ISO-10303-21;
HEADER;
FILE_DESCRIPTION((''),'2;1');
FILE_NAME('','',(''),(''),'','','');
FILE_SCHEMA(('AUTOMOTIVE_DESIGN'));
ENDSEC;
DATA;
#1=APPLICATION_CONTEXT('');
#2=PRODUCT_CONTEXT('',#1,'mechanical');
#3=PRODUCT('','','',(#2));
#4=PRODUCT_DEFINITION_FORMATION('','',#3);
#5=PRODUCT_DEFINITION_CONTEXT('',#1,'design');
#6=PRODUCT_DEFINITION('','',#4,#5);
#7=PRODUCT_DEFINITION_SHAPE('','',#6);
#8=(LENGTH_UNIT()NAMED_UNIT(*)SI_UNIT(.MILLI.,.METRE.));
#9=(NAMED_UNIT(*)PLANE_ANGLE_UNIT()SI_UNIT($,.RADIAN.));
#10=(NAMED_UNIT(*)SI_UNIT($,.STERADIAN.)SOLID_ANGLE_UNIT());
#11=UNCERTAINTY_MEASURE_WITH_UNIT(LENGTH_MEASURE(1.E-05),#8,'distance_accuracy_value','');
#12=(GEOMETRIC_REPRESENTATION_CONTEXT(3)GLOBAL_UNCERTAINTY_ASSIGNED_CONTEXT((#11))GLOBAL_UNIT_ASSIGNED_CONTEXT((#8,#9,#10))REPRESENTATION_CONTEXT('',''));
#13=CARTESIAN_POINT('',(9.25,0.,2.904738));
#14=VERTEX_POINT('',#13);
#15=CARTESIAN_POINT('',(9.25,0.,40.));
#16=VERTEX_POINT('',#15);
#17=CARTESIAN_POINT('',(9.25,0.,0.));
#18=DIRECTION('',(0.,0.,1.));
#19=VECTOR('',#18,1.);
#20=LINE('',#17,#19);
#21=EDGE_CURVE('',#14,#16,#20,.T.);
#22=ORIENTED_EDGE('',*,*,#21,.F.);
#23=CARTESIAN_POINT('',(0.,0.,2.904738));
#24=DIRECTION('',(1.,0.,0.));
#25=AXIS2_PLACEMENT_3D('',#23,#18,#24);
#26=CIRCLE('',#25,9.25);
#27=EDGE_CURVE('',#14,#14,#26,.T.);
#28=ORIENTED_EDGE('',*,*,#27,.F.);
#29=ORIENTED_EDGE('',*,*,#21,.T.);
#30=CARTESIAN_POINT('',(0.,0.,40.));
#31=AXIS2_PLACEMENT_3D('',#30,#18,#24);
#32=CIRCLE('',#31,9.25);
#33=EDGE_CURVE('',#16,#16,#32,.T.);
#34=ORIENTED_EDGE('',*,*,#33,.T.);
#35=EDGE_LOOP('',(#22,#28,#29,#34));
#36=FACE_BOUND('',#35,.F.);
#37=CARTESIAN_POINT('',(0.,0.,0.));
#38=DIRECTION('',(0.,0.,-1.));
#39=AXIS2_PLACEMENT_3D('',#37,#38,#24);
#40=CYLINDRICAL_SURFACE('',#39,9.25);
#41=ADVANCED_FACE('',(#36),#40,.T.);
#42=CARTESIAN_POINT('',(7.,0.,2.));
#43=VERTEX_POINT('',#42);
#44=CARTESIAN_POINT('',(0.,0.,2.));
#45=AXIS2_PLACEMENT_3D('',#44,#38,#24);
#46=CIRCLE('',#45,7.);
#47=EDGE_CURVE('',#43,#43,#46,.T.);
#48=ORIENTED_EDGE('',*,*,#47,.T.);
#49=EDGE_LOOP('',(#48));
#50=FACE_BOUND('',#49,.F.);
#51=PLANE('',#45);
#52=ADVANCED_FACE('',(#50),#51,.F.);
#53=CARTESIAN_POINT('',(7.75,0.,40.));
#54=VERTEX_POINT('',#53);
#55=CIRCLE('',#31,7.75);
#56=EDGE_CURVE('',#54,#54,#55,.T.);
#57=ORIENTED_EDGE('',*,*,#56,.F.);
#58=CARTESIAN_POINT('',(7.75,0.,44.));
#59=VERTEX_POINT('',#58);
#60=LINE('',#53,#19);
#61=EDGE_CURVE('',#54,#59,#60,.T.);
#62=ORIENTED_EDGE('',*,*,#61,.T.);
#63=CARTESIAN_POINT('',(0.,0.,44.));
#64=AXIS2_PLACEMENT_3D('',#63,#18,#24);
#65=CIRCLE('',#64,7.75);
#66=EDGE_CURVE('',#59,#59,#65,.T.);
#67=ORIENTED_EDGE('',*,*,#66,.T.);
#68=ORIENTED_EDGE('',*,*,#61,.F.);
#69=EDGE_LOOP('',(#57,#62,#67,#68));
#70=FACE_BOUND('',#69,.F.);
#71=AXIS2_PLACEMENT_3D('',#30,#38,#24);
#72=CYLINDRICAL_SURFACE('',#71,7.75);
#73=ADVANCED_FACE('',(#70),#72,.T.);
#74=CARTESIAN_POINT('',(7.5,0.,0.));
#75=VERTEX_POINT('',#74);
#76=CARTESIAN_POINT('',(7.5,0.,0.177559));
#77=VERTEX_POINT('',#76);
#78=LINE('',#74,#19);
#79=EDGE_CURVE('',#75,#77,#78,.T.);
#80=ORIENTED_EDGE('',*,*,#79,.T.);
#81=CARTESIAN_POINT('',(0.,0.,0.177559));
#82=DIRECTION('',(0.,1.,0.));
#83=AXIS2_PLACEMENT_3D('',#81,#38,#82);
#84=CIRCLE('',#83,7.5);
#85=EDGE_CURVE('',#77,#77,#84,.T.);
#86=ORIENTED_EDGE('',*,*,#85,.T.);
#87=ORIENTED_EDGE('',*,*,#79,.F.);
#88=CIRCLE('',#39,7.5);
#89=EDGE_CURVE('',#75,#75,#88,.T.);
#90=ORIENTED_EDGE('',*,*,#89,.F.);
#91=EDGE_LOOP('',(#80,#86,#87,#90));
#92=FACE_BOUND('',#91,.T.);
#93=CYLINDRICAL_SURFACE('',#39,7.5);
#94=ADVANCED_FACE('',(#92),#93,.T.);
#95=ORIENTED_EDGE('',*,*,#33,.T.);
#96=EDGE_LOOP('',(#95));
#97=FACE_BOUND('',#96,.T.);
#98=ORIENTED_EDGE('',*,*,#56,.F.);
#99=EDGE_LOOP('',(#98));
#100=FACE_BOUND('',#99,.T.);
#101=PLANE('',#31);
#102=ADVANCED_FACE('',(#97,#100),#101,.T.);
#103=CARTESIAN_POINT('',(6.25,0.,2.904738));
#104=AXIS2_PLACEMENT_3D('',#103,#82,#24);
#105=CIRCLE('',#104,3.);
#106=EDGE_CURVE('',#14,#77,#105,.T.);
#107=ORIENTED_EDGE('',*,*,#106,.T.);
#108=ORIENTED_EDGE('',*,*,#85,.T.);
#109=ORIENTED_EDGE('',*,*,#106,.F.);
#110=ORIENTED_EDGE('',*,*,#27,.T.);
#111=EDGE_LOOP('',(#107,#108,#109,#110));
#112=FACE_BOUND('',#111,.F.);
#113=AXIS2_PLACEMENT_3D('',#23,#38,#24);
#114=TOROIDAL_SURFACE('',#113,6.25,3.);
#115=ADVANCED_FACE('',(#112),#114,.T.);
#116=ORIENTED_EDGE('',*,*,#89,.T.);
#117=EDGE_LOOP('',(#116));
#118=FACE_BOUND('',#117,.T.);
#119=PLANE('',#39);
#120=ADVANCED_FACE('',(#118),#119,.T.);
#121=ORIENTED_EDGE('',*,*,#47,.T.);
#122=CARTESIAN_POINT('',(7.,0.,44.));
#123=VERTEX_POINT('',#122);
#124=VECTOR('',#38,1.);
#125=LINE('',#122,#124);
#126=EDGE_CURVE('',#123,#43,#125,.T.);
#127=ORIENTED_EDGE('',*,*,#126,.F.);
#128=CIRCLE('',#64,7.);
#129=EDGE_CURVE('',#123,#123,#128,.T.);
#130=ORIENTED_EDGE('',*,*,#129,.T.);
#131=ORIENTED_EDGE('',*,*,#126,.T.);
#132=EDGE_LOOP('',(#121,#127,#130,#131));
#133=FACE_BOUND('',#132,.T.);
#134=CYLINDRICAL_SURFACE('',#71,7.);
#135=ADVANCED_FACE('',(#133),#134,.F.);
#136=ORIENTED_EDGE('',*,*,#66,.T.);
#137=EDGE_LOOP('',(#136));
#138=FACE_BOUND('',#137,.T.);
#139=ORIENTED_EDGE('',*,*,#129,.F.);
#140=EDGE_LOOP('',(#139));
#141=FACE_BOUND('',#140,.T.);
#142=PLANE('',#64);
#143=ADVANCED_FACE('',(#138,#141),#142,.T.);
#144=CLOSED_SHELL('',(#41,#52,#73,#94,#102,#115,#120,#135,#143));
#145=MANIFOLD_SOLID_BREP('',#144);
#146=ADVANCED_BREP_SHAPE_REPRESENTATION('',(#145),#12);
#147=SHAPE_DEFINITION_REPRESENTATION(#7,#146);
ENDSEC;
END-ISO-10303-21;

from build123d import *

# Parameters (mm, degrees)
F0_R     = 9.25
F0_R_2   = 7
F1_DEPTH = 40
F2_R     = 7.5
F4_DEPTH = 2
F5_R     = 7.75
F5_R_2   = 7
F6_DEPTH = 4


# Not quite as in the source:
# - a fillet or chamfer that OpenCascade refuses, or shapes differently, is made with other operations: its cross-section is extruded or revolved along the edge and cut away or added


with BuildPart() as f1:
    # F0 (on Top) → F1 (new body)
    with BuildSketch(Plane.XY):
        Circle(F0_R)
        Circle(F0_R_2, mode=Mode.SUBTRACT)
    extrude(amount=F1_DEPTH)

    # F3: fillet of radius 3 on 1 edges, made by hand

    # F3_s1 → F3_t2 (revolve, cut)
    with BuildSketch(Plane.XZ):
        with BuildLine():
            ThreePointArc((9.25, 2.9047375097), (8.6217082451, 1.0676202026), (7, 0))
            Line((7, 0), (9.25, 0))
            Line((9.25, 0), (9.25, 2.9047375097))
        make_face()
    revolve(axis=Axis((0, 0, 0), (0, 0, 1)), mode=Mode.SUBTRACT)

    # F2 (on face) → F4 (join)
    with BuildSketch(Plane(origin=(0, 0, 0), x_dir=(1, 0, 0), z_dir=(0, 0, -1))):
        Circle(F2_R)
    extrude(amount=-F4_DEPTH)

    # F5 (on face) → F6 (join)
    with BuildSketch(Plane.XY.offset(40)):
        Circle(F5_R)
        Circle(F5_R_2, mode=Mode.SUBTRACT)
    extrude(amount=F6_DEPTH)


solid = f1.part
